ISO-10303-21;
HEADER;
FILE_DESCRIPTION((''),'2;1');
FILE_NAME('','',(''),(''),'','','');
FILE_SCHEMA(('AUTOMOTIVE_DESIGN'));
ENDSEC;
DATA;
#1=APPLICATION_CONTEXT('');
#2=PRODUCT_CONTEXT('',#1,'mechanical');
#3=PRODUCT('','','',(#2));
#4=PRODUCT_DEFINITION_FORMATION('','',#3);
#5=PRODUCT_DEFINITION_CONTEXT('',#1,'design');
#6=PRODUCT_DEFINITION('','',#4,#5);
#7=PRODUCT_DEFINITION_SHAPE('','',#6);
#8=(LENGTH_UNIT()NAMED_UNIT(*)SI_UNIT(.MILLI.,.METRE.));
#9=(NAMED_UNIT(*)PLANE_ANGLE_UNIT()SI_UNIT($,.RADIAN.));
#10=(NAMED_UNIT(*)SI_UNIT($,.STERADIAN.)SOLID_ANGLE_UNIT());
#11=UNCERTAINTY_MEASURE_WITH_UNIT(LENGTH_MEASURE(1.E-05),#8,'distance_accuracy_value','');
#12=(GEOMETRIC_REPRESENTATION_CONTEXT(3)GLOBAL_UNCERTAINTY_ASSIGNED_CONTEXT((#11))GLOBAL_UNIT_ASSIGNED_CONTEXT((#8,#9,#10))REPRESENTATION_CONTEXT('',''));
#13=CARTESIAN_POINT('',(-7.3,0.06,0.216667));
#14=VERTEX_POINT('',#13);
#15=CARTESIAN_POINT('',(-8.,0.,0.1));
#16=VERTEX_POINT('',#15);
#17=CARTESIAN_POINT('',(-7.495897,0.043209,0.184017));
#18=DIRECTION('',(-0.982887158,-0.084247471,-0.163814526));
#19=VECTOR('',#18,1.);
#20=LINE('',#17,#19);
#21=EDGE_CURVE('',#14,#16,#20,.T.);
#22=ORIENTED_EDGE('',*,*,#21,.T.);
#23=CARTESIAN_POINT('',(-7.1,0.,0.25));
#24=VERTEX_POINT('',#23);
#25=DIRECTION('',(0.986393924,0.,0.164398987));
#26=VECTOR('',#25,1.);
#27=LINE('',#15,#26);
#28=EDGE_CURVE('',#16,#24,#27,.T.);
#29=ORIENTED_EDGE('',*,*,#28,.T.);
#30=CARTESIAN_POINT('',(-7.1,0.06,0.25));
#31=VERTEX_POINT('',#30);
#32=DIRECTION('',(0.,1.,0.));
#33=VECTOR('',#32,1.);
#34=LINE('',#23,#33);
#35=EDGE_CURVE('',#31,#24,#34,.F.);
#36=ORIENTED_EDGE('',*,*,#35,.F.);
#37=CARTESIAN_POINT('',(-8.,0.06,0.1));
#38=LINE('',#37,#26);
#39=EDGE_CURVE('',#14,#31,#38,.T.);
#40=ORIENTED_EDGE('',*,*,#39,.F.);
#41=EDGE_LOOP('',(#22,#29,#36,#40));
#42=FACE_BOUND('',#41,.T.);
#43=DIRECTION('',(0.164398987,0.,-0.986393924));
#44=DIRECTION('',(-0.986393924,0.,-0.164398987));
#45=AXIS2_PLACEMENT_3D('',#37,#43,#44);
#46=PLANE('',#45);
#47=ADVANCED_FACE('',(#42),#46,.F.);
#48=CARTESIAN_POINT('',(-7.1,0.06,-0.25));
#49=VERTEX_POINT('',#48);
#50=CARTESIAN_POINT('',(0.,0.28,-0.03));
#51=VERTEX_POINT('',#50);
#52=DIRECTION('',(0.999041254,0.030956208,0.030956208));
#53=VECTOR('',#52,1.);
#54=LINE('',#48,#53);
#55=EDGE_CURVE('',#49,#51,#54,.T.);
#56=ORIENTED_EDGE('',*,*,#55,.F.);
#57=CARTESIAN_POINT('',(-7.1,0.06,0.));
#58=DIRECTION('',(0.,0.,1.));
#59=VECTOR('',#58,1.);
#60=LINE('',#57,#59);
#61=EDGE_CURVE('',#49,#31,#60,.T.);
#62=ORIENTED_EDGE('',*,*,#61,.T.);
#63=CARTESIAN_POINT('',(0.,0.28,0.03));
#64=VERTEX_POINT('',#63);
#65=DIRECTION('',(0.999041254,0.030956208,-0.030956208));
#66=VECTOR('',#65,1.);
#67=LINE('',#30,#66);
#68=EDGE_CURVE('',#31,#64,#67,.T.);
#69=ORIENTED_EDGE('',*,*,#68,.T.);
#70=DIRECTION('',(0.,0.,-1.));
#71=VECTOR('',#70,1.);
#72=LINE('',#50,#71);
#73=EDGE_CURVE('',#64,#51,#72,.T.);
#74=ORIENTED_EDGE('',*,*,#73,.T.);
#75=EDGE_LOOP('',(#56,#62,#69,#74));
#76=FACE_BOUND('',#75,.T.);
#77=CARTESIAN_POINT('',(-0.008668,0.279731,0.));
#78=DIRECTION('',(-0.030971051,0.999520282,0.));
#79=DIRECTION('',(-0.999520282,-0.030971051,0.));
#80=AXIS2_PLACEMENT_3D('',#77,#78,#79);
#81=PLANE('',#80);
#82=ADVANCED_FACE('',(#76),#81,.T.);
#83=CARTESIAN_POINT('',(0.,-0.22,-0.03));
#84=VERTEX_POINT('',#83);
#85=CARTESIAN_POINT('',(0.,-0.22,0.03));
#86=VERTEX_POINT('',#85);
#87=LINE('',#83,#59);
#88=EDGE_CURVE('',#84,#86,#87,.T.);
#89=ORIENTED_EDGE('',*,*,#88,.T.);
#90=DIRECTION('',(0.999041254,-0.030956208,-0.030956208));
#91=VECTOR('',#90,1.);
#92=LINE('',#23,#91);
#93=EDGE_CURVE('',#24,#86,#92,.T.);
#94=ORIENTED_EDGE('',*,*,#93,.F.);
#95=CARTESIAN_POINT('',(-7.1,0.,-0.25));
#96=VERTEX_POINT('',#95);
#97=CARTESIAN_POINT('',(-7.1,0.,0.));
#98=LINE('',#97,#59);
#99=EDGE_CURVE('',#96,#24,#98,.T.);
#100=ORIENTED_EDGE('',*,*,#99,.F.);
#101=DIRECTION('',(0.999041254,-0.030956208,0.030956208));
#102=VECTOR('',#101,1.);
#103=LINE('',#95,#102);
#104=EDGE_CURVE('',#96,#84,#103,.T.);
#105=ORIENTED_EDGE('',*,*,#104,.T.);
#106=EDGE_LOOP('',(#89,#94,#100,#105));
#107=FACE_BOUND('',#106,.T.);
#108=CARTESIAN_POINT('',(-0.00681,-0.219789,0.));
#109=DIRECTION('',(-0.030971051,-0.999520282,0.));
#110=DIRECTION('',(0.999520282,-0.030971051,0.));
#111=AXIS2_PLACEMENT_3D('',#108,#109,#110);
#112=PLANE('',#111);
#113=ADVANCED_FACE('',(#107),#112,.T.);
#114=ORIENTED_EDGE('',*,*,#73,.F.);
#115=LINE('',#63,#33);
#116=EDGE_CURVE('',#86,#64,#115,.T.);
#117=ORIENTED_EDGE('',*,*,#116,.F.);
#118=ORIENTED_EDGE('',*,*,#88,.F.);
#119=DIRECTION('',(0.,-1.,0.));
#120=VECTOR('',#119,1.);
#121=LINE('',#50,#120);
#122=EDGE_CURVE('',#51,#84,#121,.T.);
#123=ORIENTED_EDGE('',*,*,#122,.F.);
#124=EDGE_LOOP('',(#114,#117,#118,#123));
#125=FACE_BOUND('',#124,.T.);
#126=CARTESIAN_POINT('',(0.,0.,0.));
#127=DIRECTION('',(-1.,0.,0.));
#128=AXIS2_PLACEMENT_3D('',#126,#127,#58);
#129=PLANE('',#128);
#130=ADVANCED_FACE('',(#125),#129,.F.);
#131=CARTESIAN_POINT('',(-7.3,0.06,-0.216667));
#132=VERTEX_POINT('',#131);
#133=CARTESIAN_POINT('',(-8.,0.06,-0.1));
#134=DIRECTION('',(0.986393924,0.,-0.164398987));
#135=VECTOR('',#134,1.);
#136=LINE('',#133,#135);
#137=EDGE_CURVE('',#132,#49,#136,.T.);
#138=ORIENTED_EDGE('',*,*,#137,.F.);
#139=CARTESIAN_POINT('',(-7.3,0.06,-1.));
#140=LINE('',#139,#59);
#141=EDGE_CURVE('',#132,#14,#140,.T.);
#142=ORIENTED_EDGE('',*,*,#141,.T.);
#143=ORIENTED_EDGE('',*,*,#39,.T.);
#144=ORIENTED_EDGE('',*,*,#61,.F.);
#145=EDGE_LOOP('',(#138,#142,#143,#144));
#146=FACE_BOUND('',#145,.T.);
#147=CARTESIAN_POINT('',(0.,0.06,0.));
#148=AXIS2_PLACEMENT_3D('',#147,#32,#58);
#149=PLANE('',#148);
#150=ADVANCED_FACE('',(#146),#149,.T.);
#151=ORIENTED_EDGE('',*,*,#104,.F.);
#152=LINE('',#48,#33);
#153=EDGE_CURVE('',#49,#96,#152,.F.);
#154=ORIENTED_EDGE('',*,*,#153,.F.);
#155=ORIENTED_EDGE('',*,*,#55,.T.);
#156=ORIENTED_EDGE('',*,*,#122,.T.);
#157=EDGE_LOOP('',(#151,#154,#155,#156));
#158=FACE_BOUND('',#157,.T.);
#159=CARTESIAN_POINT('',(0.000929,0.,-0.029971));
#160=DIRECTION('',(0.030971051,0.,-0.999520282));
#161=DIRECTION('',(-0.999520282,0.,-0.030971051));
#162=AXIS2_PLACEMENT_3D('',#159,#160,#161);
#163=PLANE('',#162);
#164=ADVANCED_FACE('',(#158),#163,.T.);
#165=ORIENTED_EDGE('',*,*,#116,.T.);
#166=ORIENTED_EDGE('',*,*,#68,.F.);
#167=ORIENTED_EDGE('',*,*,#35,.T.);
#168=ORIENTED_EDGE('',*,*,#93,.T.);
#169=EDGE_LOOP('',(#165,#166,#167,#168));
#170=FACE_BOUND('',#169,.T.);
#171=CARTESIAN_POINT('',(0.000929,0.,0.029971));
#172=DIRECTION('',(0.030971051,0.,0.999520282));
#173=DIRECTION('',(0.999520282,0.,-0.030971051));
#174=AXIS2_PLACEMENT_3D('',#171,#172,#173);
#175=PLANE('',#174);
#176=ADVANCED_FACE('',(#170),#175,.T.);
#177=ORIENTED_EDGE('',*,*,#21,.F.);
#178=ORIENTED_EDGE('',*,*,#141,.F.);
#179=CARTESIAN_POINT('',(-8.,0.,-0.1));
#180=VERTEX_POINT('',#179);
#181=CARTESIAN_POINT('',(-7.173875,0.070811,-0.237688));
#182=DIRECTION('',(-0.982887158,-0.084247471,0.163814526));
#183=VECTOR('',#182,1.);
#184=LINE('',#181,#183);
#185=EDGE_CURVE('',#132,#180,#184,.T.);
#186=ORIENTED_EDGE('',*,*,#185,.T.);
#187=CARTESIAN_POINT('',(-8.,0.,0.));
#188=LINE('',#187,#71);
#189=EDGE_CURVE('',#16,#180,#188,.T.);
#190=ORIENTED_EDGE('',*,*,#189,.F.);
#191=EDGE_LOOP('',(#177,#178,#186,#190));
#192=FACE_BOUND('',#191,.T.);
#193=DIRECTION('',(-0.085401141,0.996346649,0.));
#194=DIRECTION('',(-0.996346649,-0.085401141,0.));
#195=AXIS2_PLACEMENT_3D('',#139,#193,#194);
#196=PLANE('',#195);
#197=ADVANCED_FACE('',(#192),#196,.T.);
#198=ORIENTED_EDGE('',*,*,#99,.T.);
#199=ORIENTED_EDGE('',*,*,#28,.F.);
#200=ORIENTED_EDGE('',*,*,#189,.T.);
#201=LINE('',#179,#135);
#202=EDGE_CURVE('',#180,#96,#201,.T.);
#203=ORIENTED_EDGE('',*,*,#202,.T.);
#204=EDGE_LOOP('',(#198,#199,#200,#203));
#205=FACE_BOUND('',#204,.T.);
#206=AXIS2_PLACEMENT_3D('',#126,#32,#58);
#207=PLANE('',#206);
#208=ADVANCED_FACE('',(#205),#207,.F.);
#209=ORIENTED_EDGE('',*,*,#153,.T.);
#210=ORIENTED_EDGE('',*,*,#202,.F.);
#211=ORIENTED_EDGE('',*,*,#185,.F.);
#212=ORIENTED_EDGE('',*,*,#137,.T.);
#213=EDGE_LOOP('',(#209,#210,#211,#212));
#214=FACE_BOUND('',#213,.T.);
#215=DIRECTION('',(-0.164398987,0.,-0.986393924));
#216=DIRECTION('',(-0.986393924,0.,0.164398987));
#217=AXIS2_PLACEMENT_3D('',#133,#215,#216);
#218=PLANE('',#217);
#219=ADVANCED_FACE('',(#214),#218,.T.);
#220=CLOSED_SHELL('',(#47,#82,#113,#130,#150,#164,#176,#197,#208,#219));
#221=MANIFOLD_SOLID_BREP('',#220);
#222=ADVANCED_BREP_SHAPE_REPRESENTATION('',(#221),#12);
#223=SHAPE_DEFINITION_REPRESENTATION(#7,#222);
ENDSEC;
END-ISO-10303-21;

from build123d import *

# Parameters (mm, degrees)
BOSS_EXTRUDE1_DEPTH = 0.06
CUT_EXTRUDE3_DEPTH  = 9.09728967
CUT_EXTRUDE4_DEPTH  = 9.09728967
CUT_EXTRUDE5_DEPTH  = 2.5
SKETCH7_W           = 7.1
SKETCH7_H           = 0.5
CUT_EXTRUDE6_DEPTH  = 2.5


with BuildPart() as part:
    # Sketch1 → Boss-Extrude1 (new body)
    with BuildSketch(Plane(origin=(0, 0, 0), x_dir=(1, 0, 0), z_dir=(0, 1, 0))):
        with BuildLine():
            ThreePointArc((-0.362264151, -0.932075472), (-0.747576714, -0.664175471), (-0.968245837, -0.25))
            Line((-0.968245837, -0.25), (-4, -0.25))
            Line((-4, -0.25), (-0.362264151, -0.932075472))
        make_face()
        with BuildLine():
            ThreePointArc((-0.968245837, 0.25), (-0.747576714, 0.664175471), (-0.362264151, 0.932075472))
            Line((-0.362264151, 0.932075472), (-4, 0.25))
            Line((-4, 0.25), (-0.968245837, 0.25))
        make_face()
        with BuildLine():
            ThreePointArc((-0.968245837, -0.25), (-1, 0), (-0.968245837, 0.25))
            Line((-0.968245837, 0.25), (-4, 0.25))
            Line((-4, 0.25), (-8, 0.25))
            Line((-8, 0.25), (-8, -0.25))
            Line((-8, -0.25), (-4, -0.25))
            Line((-4, -0.25), (-0.968245837, -0.25))
        make_face()
        with BuildLine():
            Line((0, -1), (0, -0.25))
            Line((0, -0.25), (-0.968245837, -0.25))
            ThreePointArc((-0.968245837, -0.25), (-0.747576714, -0.664175471), (-0.362264151, -0.932075472))
            Line((-0.362264151, -0.932075472), (0, -1))
        make_face()
        with BuildLine():
            Line((0, 0.25), (0, 1))
            Line((0, 1), (-0.362264151, 0.932075472))
            ThreePointArc((-0.362264151, 0.932075472), (-0.747576714, 0.664175471), (-0.968245837, 0.25))
            Line((-0.968245837, 0.25), (0, 0.25))
        make_face()
        with BuildLine():
            Line((0, -0.25), (0, 0.25))
            Line((0, 0.25), (-0.968245837, 0.25))
            ThreePointArc((-0.968245837, 0.25), (-1, 0), (-0.968245837, -0.25))
            Line((-0.968245837, -0.25), (0, -0.25))
        make_face()
    extrude(amount=BOSS_EXTRUDE1_DEPTH)

    # Sketch5 → Cut-Extrude3 (cut, through all)
    with BuildSketch(Plane.XY.offset(0.25)):
        Polygon((-8, 0), (-8, 0.06), (-7.3, 0.06), align=None)
    extrude(amount=-CUT_EXTRUDE3_DEPTH, mode=Mode.SUBTRACT)

    # 3DSketch1 → Cut-Extrude4 (cut, through all)
    with BuildSketch(Plane(origin=(-8, 0.06, 0.25), x_dir=(0.8741572761215382, 0, -0.48564293117863155), z_dir=(0, 1, 0))):
        Polygon((0, 0), (0.07284644, 0.131123591), (0.786741549, -0.437078638), align=None)
        Polygon((1.029563014, 0), (0.242821466, 0.437078638), (0.169975026, 0.305955047), align=None)
    extrude(amount=-CUT_EXTRUDE4_DEPTH, mode=Mode.SUBTRACT)

    # Sketch6 → Cut-Extrude5 (cut)
    with BuildSketch(Plane(origin=(0, 0.06, 0), x_dir=(1, 0, 0), z_dir=(0, 1, 0))):
        Polygon((0, 1), (-4, 0.25), (0, 0.25), align=None)
        Polygon((0, -0.25), (-4, -0.25), (0, -1), align=None)
    extrude(amount=-CUT_EXTRUDE5_DEPTH, mode=Mode.SUBTRACT)

    # Sketch7 → Cut-Extrude6 (cut)
    with BuildSketch(Plane(origin=(0, 0.06, 0), x_dir=(1, 0, 0), z_dir=(0, 1, 0))):
        with Locations((-3.55, 0)):
            Rectangle(SKETCH7_W, SKETCH7_H)
    extrude(amount=-CUT_EXTRUDE6_DEPTH, mode=Mode.SUBTRACT)

    # Loft2: read off the stored shape, not the designer's step
    # Loft2: loft between two sections, ruled curve by curve
    loft2_from = [
        Edge.make_line((0, 0.28, 0.03), (0, 0.28, -0.03)),
        Edge.make_line((0, 0.28, -0.03), (0, -0.22, -0.03)),
        Edge.make_line((0, -0.22, 0.03), (0, 0.28, 0.03)),
        Edge.make_line((0, -0.22, -0.03), (0, -0.22, 0.03)),
    ]
    loft2_to = [
        Edge.make_line((-7.1, 0.06, 0.25), (-7.1, 0.06, -0.25)),
        Edge.make_line((-7.1, 0.06, -0.25), (-7.1, 0, -0.25)),
        Edge.make_line((-7.1, 0, 0.25), (-7.1, 0.06, 0.25)),
        Edge.make_line((-7.1, 0, -0.25), (-7.1, 0, 0.25)),
    ]
    loft2 = Solid(Shell([*[Face.make_surface_from_curves(loft2_from[k], loft2_to[k]) for k in range(4)], Face(Wire(loft2_from)), Face(Wire(loft2_to))]))
    add(loft2)


solid = part.part
